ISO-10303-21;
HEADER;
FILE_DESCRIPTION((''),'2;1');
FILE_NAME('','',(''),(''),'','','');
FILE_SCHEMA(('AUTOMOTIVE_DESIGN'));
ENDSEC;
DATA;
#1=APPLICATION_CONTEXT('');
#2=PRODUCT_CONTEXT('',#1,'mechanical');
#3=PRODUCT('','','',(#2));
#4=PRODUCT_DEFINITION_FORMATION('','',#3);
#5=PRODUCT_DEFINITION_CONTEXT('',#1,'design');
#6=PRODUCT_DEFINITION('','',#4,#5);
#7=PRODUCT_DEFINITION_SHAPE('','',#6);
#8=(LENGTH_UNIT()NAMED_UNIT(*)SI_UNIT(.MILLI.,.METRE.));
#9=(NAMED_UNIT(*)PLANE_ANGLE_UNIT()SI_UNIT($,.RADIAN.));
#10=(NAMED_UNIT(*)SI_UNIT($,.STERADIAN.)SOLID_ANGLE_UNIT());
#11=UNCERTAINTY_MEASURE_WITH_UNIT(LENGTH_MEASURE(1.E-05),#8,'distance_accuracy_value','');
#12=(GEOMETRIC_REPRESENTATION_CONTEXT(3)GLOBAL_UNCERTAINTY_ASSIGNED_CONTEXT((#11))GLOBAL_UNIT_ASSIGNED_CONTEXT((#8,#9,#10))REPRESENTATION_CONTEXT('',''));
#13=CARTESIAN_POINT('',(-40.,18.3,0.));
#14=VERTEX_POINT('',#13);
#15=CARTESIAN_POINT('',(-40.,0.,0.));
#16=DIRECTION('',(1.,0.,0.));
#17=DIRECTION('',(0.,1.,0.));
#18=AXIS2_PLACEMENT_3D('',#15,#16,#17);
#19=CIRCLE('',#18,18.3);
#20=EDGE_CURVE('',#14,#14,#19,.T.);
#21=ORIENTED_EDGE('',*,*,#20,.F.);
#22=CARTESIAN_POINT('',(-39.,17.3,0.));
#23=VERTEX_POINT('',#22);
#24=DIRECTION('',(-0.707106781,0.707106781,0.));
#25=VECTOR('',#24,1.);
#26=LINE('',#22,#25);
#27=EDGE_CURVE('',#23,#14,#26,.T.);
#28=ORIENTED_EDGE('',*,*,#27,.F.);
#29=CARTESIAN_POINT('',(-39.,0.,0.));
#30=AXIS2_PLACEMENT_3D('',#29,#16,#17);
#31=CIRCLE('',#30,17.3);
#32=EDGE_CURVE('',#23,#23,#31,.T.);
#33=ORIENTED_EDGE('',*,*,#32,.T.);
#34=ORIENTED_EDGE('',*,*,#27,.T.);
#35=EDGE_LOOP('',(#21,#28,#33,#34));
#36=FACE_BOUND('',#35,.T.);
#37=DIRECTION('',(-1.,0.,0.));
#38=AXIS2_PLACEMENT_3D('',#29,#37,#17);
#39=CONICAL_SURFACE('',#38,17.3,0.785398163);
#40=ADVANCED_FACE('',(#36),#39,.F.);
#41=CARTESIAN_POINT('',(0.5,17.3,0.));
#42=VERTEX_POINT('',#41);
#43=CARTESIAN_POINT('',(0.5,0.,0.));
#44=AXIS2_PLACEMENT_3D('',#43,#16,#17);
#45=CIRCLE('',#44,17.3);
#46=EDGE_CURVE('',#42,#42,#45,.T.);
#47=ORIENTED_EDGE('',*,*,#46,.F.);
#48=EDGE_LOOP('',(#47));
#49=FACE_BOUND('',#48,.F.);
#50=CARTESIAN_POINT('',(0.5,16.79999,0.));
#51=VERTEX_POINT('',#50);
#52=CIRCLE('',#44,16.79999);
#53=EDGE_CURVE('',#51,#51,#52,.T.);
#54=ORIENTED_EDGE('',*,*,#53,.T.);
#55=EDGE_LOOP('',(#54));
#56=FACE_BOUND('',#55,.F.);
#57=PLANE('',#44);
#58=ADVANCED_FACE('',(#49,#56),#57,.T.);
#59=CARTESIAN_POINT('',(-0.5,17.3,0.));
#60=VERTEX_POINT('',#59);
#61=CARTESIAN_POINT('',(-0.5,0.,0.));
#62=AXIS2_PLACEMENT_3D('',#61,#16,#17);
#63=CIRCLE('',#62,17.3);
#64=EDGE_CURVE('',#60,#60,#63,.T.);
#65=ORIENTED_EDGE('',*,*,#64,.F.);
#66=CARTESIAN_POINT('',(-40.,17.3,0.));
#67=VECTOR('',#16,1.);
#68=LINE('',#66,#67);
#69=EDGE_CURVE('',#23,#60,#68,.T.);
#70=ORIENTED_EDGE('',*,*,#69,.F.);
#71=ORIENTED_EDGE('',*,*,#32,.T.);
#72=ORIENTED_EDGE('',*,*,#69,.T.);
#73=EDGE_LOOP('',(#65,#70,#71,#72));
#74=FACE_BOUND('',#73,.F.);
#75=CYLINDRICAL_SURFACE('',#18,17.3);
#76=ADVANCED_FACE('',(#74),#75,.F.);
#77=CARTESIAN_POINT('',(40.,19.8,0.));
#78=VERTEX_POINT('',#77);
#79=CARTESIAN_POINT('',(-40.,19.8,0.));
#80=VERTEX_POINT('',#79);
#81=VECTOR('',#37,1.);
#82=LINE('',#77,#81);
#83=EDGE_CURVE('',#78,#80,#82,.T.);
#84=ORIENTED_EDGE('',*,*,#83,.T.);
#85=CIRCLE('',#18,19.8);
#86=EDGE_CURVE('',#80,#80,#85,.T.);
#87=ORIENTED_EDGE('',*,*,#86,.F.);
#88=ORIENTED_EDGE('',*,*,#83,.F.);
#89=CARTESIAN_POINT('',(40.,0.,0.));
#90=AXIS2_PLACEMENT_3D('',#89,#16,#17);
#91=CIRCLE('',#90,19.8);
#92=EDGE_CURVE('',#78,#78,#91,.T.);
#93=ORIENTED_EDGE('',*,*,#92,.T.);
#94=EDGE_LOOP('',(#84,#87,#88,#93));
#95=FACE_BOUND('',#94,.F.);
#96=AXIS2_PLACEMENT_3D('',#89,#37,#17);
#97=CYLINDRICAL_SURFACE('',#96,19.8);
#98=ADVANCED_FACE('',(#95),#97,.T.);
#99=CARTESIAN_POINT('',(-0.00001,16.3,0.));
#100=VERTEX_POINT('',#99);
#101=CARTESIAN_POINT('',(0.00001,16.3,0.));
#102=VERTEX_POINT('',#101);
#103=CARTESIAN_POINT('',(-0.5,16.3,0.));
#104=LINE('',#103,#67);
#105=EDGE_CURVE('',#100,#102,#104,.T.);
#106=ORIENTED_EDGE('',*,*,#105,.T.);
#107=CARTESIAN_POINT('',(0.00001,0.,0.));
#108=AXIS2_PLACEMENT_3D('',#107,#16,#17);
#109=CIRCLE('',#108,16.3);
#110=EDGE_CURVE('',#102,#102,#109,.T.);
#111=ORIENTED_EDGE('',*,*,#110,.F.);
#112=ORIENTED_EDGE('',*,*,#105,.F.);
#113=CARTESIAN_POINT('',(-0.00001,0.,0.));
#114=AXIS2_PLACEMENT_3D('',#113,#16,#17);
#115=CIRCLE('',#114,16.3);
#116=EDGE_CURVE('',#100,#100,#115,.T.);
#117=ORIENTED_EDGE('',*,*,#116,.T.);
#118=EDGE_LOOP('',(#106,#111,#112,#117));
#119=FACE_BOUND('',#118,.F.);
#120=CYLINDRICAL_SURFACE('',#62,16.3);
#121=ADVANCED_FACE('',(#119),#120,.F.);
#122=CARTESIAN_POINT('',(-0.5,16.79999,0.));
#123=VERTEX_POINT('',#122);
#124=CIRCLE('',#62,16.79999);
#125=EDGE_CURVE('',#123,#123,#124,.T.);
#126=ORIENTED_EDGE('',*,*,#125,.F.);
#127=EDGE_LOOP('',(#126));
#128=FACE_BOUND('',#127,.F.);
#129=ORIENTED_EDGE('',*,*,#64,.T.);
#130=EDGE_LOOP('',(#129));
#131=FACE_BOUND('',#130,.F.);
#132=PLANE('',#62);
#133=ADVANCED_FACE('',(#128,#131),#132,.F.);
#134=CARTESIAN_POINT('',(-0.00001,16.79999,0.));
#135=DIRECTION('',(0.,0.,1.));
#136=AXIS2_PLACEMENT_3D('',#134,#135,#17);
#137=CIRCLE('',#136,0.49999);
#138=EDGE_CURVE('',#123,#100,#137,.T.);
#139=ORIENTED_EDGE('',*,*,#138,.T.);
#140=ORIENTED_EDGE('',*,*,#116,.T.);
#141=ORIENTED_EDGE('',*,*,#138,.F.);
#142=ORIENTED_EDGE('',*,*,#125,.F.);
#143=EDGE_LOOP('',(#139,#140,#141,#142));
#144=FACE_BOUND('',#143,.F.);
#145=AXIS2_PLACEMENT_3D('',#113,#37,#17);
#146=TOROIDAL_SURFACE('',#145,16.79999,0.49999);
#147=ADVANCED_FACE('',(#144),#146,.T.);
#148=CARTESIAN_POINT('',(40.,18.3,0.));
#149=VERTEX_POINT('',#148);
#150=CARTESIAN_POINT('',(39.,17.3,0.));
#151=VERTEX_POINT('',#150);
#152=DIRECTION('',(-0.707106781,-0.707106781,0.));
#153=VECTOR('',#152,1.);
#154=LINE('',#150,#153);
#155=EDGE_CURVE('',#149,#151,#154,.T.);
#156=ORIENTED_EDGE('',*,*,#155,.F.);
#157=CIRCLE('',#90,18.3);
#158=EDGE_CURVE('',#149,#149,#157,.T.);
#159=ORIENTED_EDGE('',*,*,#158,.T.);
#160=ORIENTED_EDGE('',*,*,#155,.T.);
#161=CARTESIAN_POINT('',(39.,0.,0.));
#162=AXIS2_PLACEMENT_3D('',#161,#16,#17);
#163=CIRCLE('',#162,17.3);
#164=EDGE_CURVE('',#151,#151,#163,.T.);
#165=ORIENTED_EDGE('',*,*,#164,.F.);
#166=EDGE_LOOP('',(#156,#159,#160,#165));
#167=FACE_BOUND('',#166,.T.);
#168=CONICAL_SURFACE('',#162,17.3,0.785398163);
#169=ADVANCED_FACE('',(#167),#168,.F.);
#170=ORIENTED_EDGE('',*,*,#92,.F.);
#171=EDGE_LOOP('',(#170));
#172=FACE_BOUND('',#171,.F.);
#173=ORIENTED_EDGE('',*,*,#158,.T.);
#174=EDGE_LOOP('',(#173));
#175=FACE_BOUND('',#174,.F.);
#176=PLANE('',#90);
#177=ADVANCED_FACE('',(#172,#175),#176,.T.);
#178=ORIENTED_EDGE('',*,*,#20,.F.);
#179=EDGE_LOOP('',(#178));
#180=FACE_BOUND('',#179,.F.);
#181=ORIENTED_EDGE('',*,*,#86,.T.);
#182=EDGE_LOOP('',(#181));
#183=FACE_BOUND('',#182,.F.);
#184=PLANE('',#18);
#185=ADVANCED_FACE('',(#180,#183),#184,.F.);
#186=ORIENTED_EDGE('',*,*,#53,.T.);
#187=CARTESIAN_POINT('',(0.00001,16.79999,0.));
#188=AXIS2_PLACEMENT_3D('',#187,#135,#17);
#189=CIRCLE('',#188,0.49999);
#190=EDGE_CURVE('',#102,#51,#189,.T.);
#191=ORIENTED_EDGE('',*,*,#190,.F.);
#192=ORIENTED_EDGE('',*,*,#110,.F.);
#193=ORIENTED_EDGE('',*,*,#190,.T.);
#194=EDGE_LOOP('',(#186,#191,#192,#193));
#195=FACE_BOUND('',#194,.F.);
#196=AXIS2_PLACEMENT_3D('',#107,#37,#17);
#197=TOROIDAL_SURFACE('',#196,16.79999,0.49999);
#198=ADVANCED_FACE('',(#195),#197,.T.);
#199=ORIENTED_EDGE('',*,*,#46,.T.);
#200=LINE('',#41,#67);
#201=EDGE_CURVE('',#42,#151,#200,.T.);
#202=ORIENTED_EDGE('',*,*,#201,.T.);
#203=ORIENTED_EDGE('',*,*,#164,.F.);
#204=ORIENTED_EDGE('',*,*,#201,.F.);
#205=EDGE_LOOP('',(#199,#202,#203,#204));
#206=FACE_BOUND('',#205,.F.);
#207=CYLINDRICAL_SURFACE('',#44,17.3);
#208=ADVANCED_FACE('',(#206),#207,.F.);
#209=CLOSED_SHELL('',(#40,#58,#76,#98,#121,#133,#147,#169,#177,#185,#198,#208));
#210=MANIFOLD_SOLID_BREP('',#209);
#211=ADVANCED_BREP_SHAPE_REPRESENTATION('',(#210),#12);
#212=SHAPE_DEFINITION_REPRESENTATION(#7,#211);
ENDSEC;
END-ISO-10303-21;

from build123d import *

# Parameters (mm, degrees)
F2_R    = 0.49999
F3_SIZE = 1


# Not quite as in the source:
# - a fillet or chamfer is up to 0.001 mm smaller than in the source, because OpenCascade refuses the exact size


with BuildPart() as f1:
    # F0 (on Top) → F1 (revolve)
    with BuildSketch(Plane.XY):
        Polygon((0, 19.8), (-40, 19.8), (-40, 17.3), (-0.5, 17.3), (-0.5, 16.3), (0, 16.3), (0.5, 16.3), (0.5, 17.3), (40, 17.3), (40, 19.8), align=None)
    revolve(axis=Axis((0, 0, 0), (1, 0, 0)))

    # F2 (radius 0.5 in the source; OpenCascade refuses exactly that, so slightly less here)
    f2_edges = [f1.edges().sort_by_distance(p)[0] for p in [
        (-0.5, -16.3, 0),
        (0.5, -16.3, 0),
    ]]
    fillet(f2_edges, radius=F2_R)

    # F3
    f3_edges = [f1.edges().sort_by_distance(p)[0] for p in [
        (-40, -17.3, 0),
        (40, -17.3, 0),
    ]]
    chamfer(f3_edges, length=F3_SIZE)


solid = f1.part
